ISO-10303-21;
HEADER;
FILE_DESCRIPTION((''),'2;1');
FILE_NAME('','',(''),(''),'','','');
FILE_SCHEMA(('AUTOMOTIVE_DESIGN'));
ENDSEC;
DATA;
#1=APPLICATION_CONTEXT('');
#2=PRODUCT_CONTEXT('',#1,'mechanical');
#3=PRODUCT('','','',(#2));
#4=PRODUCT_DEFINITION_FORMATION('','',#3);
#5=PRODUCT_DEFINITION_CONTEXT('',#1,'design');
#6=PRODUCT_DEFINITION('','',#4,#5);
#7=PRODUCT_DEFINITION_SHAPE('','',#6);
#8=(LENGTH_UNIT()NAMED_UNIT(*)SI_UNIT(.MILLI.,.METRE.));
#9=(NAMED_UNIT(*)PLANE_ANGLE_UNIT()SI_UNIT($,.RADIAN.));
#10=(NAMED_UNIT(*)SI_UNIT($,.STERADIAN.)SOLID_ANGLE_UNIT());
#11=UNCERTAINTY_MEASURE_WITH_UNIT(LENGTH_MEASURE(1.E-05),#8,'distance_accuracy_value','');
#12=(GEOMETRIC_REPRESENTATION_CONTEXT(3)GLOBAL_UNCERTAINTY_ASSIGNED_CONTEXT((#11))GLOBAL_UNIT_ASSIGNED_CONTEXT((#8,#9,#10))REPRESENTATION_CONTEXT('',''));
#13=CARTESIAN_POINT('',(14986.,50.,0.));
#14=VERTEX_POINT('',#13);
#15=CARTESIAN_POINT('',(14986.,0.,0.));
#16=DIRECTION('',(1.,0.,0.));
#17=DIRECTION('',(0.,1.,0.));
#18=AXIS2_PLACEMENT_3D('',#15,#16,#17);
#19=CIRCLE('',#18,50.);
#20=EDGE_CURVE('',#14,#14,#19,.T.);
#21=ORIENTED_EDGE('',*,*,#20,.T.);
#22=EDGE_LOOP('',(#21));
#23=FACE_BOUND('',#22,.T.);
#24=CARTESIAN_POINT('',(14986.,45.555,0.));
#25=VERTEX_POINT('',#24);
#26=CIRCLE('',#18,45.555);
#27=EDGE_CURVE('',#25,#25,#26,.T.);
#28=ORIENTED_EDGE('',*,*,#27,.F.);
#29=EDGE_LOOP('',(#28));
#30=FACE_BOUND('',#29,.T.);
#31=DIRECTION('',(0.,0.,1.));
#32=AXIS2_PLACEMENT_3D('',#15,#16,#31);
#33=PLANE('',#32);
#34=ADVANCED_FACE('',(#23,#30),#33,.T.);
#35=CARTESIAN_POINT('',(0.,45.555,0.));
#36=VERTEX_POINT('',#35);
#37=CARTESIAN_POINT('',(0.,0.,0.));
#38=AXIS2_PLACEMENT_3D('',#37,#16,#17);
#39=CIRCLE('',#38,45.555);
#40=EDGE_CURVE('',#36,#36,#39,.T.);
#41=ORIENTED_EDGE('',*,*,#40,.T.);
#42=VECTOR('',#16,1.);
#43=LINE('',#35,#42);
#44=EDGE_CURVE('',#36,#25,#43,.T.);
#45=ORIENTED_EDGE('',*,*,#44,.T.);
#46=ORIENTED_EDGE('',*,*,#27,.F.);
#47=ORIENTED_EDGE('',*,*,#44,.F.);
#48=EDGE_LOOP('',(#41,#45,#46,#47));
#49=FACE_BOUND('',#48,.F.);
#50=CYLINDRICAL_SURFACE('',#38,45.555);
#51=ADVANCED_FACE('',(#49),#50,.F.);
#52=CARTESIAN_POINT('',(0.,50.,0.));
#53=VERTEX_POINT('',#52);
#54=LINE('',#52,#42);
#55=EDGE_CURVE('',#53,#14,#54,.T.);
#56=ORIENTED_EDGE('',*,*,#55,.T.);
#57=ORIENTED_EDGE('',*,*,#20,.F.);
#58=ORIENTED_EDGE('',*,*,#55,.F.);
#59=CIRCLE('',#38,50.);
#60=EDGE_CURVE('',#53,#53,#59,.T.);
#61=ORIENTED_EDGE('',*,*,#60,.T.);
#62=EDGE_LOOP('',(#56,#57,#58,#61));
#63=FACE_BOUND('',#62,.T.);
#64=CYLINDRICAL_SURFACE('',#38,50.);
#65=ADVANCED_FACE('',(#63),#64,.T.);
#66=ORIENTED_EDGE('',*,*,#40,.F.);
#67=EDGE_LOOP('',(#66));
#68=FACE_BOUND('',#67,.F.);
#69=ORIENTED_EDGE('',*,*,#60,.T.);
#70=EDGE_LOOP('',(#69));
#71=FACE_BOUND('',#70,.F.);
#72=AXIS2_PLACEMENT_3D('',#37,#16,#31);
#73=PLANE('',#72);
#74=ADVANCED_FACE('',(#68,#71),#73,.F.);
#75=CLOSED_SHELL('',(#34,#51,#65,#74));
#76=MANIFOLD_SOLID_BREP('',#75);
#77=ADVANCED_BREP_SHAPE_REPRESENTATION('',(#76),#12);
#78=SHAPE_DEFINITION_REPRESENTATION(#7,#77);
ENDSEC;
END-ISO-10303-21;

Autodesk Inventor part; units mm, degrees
ref_plane "YZ Plane" through (0, 0, 0) normal (1, 0, 0) x (0, 1, 0)
ref_plane "XZ Plane" through (0, 0, 0) normal (0, 1, 0) x (-1, 0, 0)
ref_plane "XY Plane" through (0, 0, 0) normal (0, 0, 1) x (1, 0, 0)
sketch "Sketch1" plane through (0, 0, 0) normal (1, 0, 0) x (0, 1, 0)
  circle A0 centre (0, 0) radius 50
  circle A1 centre (0, 0) radius 45.555
  dimension "d0" = 100
  dimension "d1" = 4.445
sketch "Sketch2" plane through (0, 0, 0) normal (0, 1, 0) x (-1, 0, 0)
  line L0 (0, 0) -> (-14986, 0)
  dimension "d6" = 14986
sweep "Sweep1" add profiles "Sketch1" path "Sketch2"
properties part number "airgnd_exchange"
